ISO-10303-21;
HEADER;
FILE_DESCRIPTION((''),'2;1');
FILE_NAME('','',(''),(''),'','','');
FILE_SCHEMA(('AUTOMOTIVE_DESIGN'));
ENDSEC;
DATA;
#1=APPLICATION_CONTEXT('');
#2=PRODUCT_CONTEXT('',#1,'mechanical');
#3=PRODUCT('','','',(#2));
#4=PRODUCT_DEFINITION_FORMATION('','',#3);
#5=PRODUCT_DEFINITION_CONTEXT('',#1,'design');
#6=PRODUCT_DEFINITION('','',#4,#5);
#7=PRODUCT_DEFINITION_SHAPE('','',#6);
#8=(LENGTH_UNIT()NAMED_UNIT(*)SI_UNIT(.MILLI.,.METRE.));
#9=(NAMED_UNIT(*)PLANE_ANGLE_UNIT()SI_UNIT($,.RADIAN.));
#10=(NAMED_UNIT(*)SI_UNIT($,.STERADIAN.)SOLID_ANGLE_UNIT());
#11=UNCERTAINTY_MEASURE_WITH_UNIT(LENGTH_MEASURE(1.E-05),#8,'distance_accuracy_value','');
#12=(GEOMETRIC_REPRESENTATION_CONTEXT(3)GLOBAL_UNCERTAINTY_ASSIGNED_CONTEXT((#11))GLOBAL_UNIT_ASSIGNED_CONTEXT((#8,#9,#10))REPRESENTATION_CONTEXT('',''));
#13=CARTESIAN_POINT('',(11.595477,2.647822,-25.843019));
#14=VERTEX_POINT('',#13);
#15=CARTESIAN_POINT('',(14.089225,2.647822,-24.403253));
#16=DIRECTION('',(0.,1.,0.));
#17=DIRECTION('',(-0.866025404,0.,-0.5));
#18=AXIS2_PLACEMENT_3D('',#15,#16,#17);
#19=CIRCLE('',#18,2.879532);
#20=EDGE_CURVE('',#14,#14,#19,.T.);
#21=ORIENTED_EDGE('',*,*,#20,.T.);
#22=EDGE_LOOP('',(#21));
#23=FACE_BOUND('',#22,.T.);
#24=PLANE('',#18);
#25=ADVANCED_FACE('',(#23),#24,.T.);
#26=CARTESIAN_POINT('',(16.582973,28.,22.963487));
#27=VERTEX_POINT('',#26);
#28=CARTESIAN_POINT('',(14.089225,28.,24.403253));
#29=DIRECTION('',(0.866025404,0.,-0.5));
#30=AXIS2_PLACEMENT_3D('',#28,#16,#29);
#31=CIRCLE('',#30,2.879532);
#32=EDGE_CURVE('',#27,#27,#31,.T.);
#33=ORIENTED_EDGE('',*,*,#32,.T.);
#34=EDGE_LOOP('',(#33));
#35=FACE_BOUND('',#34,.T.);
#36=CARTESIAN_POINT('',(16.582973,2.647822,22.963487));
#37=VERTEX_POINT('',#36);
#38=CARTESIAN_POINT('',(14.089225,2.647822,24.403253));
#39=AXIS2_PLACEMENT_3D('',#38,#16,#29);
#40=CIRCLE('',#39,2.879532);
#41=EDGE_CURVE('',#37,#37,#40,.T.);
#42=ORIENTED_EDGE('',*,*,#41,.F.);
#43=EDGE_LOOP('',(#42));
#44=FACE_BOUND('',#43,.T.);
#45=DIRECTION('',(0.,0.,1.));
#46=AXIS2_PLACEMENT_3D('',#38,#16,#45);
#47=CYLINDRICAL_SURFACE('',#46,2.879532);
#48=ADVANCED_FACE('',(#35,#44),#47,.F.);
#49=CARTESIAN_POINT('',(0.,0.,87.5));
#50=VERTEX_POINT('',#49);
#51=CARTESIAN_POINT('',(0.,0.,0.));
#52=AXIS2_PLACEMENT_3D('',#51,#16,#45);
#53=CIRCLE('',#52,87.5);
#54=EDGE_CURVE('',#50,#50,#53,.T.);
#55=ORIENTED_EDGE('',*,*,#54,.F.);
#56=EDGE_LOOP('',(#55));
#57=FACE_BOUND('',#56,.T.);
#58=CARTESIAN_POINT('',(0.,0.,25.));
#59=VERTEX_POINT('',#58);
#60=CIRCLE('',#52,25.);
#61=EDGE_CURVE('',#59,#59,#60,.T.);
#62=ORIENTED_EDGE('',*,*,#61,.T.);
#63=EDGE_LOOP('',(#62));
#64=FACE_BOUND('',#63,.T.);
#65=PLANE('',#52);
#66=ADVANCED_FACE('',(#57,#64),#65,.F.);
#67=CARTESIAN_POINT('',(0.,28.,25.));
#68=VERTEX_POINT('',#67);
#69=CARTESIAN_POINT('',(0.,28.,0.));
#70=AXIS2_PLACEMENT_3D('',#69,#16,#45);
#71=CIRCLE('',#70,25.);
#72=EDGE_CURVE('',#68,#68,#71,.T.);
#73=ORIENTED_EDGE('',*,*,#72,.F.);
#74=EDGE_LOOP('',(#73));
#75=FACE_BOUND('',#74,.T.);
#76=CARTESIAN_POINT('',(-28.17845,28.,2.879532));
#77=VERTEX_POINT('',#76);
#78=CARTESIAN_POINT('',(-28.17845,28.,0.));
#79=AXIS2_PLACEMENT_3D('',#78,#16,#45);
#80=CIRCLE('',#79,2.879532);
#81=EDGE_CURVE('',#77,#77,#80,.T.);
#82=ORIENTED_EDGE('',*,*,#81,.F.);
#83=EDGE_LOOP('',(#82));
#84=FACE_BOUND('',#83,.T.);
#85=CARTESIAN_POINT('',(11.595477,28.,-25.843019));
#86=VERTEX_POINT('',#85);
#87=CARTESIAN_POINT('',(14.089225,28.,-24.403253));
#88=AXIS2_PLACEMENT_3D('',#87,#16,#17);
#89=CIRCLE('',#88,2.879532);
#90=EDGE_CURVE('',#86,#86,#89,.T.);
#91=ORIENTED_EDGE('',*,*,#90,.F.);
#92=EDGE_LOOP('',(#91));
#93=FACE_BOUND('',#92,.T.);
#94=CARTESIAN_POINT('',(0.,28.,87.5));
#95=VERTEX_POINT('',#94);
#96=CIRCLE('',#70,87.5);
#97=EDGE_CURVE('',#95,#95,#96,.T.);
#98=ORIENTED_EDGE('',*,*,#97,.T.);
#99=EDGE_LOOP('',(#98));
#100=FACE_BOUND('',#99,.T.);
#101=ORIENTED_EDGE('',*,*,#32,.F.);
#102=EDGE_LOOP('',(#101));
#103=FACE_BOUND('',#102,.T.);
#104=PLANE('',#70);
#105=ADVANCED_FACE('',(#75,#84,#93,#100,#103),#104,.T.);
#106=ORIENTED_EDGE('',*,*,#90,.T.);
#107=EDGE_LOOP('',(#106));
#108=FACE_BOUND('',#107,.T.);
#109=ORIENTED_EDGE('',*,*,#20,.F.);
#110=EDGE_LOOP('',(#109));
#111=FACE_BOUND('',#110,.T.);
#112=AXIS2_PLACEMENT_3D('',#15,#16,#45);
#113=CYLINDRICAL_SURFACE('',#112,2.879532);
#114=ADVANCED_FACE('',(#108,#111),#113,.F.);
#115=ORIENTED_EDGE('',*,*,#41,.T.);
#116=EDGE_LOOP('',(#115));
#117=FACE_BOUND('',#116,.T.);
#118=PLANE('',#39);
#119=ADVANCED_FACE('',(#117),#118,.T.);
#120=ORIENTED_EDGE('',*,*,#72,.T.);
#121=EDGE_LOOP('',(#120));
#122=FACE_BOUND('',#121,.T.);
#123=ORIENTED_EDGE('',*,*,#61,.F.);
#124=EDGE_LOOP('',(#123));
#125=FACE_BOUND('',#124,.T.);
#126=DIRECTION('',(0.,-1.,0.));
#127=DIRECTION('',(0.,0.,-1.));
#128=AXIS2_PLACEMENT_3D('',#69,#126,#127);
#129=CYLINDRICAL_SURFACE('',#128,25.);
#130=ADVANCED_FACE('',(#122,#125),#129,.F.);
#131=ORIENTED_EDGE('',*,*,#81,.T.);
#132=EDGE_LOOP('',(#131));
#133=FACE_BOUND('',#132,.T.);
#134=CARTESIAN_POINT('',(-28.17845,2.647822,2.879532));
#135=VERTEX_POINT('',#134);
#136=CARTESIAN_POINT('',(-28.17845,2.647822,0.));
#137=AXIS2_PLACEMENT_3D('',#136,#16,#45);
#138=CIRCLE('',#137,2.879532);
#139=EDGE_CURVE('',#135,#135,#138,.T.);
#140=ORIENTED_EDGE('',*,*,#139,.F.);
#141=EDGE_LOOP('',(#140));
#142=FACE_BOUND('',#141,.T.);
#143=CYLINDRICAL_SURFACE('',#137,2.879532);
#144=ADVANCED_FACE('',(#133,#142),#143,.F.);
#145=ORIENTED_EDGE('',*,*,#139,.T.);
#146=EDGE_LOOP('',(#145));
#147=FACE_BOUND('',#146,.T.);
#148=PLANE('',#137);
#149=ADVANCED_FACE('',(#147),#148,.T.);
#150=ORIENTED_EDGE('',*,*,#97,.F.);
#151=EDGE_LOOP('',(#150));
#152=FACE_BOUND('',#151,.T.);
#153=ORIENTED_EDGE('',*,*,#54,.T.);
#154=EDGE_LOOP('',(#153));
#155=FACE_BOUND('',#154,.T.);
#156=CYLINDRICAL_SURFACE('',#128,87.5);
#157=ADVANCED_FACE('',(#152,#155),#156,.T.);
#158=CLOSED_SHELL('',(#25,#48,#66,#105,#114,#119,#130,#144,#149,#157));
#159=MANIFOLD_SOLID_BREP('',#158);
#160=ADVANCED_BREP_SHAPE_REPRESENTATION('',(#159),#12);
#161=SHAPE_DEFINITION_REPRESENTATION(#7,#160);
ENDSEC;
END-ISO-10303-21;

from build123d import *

# Parameters (mm, degrees)
SKETCH1_R           = 87.5
BOSS_EXTRUDE1_DEPTH = 28
SKETCH2_R           = 25
CUT_EXTRUDE1_DEPTH  = 127.871982723
SKETCH3_R           = 2.879531971
CUT_EXTRUDE2_DEPTH  = 25.352178009
CIRPATTERN1_COUNT   = 3


with BuildPart() as part:
    # Sketch1 → Boss-Extrude1 (new body)
    with BuildSketch(Plane(origin=(0, 0, 0), x_dir=(1, 0, 0), z_dir=(0, 1, 0))):
        Circle(SKETCH1_R)
    extrude(amount=BOSS_EXTRUDE1_DEPTH)

    # Sketch2 → Cut-Extrude1 (cut, through all)
    with BuildSketch(Plane(origin=(0, 0, 0), x_dir=(1, 0, 0), z_dir=(0, 1, 0))):
        Circle(SKETCH2_R)
    extrude(amount=CUT_EXTRUDE1_DEPTH, mode=Mode.SUBTRACT)

    # Sketch3 → Cut-Extrude2 (cut)
    with BuildSketch(Plane(origin=(0, 28, 0), x_dir=(1, 0, 0), z_dir=(0, 1, 0))):
        with Locations((-28.178449692, 0)):
            Circle(SKETCH3_R)
    cut_extrude2 = extrude(amount=-CUT_EXTRUDE2_DEPTH, mode=Mode.SUBTRACT)

    # CirPattern1: Cut-Extrude2 ×3 about axis
    cirpattern1_axis = Axis((0, 0, 0), (0, 1, 0))
    for i in range(1, CIRPATTERN1_COUNT):
        add(cut_extrude2.rotate(cirpattern1_axis, i * 360 / CIRPATTERN1_COUNT), mode=Mode.SUBTRACT)


solid = part.part
